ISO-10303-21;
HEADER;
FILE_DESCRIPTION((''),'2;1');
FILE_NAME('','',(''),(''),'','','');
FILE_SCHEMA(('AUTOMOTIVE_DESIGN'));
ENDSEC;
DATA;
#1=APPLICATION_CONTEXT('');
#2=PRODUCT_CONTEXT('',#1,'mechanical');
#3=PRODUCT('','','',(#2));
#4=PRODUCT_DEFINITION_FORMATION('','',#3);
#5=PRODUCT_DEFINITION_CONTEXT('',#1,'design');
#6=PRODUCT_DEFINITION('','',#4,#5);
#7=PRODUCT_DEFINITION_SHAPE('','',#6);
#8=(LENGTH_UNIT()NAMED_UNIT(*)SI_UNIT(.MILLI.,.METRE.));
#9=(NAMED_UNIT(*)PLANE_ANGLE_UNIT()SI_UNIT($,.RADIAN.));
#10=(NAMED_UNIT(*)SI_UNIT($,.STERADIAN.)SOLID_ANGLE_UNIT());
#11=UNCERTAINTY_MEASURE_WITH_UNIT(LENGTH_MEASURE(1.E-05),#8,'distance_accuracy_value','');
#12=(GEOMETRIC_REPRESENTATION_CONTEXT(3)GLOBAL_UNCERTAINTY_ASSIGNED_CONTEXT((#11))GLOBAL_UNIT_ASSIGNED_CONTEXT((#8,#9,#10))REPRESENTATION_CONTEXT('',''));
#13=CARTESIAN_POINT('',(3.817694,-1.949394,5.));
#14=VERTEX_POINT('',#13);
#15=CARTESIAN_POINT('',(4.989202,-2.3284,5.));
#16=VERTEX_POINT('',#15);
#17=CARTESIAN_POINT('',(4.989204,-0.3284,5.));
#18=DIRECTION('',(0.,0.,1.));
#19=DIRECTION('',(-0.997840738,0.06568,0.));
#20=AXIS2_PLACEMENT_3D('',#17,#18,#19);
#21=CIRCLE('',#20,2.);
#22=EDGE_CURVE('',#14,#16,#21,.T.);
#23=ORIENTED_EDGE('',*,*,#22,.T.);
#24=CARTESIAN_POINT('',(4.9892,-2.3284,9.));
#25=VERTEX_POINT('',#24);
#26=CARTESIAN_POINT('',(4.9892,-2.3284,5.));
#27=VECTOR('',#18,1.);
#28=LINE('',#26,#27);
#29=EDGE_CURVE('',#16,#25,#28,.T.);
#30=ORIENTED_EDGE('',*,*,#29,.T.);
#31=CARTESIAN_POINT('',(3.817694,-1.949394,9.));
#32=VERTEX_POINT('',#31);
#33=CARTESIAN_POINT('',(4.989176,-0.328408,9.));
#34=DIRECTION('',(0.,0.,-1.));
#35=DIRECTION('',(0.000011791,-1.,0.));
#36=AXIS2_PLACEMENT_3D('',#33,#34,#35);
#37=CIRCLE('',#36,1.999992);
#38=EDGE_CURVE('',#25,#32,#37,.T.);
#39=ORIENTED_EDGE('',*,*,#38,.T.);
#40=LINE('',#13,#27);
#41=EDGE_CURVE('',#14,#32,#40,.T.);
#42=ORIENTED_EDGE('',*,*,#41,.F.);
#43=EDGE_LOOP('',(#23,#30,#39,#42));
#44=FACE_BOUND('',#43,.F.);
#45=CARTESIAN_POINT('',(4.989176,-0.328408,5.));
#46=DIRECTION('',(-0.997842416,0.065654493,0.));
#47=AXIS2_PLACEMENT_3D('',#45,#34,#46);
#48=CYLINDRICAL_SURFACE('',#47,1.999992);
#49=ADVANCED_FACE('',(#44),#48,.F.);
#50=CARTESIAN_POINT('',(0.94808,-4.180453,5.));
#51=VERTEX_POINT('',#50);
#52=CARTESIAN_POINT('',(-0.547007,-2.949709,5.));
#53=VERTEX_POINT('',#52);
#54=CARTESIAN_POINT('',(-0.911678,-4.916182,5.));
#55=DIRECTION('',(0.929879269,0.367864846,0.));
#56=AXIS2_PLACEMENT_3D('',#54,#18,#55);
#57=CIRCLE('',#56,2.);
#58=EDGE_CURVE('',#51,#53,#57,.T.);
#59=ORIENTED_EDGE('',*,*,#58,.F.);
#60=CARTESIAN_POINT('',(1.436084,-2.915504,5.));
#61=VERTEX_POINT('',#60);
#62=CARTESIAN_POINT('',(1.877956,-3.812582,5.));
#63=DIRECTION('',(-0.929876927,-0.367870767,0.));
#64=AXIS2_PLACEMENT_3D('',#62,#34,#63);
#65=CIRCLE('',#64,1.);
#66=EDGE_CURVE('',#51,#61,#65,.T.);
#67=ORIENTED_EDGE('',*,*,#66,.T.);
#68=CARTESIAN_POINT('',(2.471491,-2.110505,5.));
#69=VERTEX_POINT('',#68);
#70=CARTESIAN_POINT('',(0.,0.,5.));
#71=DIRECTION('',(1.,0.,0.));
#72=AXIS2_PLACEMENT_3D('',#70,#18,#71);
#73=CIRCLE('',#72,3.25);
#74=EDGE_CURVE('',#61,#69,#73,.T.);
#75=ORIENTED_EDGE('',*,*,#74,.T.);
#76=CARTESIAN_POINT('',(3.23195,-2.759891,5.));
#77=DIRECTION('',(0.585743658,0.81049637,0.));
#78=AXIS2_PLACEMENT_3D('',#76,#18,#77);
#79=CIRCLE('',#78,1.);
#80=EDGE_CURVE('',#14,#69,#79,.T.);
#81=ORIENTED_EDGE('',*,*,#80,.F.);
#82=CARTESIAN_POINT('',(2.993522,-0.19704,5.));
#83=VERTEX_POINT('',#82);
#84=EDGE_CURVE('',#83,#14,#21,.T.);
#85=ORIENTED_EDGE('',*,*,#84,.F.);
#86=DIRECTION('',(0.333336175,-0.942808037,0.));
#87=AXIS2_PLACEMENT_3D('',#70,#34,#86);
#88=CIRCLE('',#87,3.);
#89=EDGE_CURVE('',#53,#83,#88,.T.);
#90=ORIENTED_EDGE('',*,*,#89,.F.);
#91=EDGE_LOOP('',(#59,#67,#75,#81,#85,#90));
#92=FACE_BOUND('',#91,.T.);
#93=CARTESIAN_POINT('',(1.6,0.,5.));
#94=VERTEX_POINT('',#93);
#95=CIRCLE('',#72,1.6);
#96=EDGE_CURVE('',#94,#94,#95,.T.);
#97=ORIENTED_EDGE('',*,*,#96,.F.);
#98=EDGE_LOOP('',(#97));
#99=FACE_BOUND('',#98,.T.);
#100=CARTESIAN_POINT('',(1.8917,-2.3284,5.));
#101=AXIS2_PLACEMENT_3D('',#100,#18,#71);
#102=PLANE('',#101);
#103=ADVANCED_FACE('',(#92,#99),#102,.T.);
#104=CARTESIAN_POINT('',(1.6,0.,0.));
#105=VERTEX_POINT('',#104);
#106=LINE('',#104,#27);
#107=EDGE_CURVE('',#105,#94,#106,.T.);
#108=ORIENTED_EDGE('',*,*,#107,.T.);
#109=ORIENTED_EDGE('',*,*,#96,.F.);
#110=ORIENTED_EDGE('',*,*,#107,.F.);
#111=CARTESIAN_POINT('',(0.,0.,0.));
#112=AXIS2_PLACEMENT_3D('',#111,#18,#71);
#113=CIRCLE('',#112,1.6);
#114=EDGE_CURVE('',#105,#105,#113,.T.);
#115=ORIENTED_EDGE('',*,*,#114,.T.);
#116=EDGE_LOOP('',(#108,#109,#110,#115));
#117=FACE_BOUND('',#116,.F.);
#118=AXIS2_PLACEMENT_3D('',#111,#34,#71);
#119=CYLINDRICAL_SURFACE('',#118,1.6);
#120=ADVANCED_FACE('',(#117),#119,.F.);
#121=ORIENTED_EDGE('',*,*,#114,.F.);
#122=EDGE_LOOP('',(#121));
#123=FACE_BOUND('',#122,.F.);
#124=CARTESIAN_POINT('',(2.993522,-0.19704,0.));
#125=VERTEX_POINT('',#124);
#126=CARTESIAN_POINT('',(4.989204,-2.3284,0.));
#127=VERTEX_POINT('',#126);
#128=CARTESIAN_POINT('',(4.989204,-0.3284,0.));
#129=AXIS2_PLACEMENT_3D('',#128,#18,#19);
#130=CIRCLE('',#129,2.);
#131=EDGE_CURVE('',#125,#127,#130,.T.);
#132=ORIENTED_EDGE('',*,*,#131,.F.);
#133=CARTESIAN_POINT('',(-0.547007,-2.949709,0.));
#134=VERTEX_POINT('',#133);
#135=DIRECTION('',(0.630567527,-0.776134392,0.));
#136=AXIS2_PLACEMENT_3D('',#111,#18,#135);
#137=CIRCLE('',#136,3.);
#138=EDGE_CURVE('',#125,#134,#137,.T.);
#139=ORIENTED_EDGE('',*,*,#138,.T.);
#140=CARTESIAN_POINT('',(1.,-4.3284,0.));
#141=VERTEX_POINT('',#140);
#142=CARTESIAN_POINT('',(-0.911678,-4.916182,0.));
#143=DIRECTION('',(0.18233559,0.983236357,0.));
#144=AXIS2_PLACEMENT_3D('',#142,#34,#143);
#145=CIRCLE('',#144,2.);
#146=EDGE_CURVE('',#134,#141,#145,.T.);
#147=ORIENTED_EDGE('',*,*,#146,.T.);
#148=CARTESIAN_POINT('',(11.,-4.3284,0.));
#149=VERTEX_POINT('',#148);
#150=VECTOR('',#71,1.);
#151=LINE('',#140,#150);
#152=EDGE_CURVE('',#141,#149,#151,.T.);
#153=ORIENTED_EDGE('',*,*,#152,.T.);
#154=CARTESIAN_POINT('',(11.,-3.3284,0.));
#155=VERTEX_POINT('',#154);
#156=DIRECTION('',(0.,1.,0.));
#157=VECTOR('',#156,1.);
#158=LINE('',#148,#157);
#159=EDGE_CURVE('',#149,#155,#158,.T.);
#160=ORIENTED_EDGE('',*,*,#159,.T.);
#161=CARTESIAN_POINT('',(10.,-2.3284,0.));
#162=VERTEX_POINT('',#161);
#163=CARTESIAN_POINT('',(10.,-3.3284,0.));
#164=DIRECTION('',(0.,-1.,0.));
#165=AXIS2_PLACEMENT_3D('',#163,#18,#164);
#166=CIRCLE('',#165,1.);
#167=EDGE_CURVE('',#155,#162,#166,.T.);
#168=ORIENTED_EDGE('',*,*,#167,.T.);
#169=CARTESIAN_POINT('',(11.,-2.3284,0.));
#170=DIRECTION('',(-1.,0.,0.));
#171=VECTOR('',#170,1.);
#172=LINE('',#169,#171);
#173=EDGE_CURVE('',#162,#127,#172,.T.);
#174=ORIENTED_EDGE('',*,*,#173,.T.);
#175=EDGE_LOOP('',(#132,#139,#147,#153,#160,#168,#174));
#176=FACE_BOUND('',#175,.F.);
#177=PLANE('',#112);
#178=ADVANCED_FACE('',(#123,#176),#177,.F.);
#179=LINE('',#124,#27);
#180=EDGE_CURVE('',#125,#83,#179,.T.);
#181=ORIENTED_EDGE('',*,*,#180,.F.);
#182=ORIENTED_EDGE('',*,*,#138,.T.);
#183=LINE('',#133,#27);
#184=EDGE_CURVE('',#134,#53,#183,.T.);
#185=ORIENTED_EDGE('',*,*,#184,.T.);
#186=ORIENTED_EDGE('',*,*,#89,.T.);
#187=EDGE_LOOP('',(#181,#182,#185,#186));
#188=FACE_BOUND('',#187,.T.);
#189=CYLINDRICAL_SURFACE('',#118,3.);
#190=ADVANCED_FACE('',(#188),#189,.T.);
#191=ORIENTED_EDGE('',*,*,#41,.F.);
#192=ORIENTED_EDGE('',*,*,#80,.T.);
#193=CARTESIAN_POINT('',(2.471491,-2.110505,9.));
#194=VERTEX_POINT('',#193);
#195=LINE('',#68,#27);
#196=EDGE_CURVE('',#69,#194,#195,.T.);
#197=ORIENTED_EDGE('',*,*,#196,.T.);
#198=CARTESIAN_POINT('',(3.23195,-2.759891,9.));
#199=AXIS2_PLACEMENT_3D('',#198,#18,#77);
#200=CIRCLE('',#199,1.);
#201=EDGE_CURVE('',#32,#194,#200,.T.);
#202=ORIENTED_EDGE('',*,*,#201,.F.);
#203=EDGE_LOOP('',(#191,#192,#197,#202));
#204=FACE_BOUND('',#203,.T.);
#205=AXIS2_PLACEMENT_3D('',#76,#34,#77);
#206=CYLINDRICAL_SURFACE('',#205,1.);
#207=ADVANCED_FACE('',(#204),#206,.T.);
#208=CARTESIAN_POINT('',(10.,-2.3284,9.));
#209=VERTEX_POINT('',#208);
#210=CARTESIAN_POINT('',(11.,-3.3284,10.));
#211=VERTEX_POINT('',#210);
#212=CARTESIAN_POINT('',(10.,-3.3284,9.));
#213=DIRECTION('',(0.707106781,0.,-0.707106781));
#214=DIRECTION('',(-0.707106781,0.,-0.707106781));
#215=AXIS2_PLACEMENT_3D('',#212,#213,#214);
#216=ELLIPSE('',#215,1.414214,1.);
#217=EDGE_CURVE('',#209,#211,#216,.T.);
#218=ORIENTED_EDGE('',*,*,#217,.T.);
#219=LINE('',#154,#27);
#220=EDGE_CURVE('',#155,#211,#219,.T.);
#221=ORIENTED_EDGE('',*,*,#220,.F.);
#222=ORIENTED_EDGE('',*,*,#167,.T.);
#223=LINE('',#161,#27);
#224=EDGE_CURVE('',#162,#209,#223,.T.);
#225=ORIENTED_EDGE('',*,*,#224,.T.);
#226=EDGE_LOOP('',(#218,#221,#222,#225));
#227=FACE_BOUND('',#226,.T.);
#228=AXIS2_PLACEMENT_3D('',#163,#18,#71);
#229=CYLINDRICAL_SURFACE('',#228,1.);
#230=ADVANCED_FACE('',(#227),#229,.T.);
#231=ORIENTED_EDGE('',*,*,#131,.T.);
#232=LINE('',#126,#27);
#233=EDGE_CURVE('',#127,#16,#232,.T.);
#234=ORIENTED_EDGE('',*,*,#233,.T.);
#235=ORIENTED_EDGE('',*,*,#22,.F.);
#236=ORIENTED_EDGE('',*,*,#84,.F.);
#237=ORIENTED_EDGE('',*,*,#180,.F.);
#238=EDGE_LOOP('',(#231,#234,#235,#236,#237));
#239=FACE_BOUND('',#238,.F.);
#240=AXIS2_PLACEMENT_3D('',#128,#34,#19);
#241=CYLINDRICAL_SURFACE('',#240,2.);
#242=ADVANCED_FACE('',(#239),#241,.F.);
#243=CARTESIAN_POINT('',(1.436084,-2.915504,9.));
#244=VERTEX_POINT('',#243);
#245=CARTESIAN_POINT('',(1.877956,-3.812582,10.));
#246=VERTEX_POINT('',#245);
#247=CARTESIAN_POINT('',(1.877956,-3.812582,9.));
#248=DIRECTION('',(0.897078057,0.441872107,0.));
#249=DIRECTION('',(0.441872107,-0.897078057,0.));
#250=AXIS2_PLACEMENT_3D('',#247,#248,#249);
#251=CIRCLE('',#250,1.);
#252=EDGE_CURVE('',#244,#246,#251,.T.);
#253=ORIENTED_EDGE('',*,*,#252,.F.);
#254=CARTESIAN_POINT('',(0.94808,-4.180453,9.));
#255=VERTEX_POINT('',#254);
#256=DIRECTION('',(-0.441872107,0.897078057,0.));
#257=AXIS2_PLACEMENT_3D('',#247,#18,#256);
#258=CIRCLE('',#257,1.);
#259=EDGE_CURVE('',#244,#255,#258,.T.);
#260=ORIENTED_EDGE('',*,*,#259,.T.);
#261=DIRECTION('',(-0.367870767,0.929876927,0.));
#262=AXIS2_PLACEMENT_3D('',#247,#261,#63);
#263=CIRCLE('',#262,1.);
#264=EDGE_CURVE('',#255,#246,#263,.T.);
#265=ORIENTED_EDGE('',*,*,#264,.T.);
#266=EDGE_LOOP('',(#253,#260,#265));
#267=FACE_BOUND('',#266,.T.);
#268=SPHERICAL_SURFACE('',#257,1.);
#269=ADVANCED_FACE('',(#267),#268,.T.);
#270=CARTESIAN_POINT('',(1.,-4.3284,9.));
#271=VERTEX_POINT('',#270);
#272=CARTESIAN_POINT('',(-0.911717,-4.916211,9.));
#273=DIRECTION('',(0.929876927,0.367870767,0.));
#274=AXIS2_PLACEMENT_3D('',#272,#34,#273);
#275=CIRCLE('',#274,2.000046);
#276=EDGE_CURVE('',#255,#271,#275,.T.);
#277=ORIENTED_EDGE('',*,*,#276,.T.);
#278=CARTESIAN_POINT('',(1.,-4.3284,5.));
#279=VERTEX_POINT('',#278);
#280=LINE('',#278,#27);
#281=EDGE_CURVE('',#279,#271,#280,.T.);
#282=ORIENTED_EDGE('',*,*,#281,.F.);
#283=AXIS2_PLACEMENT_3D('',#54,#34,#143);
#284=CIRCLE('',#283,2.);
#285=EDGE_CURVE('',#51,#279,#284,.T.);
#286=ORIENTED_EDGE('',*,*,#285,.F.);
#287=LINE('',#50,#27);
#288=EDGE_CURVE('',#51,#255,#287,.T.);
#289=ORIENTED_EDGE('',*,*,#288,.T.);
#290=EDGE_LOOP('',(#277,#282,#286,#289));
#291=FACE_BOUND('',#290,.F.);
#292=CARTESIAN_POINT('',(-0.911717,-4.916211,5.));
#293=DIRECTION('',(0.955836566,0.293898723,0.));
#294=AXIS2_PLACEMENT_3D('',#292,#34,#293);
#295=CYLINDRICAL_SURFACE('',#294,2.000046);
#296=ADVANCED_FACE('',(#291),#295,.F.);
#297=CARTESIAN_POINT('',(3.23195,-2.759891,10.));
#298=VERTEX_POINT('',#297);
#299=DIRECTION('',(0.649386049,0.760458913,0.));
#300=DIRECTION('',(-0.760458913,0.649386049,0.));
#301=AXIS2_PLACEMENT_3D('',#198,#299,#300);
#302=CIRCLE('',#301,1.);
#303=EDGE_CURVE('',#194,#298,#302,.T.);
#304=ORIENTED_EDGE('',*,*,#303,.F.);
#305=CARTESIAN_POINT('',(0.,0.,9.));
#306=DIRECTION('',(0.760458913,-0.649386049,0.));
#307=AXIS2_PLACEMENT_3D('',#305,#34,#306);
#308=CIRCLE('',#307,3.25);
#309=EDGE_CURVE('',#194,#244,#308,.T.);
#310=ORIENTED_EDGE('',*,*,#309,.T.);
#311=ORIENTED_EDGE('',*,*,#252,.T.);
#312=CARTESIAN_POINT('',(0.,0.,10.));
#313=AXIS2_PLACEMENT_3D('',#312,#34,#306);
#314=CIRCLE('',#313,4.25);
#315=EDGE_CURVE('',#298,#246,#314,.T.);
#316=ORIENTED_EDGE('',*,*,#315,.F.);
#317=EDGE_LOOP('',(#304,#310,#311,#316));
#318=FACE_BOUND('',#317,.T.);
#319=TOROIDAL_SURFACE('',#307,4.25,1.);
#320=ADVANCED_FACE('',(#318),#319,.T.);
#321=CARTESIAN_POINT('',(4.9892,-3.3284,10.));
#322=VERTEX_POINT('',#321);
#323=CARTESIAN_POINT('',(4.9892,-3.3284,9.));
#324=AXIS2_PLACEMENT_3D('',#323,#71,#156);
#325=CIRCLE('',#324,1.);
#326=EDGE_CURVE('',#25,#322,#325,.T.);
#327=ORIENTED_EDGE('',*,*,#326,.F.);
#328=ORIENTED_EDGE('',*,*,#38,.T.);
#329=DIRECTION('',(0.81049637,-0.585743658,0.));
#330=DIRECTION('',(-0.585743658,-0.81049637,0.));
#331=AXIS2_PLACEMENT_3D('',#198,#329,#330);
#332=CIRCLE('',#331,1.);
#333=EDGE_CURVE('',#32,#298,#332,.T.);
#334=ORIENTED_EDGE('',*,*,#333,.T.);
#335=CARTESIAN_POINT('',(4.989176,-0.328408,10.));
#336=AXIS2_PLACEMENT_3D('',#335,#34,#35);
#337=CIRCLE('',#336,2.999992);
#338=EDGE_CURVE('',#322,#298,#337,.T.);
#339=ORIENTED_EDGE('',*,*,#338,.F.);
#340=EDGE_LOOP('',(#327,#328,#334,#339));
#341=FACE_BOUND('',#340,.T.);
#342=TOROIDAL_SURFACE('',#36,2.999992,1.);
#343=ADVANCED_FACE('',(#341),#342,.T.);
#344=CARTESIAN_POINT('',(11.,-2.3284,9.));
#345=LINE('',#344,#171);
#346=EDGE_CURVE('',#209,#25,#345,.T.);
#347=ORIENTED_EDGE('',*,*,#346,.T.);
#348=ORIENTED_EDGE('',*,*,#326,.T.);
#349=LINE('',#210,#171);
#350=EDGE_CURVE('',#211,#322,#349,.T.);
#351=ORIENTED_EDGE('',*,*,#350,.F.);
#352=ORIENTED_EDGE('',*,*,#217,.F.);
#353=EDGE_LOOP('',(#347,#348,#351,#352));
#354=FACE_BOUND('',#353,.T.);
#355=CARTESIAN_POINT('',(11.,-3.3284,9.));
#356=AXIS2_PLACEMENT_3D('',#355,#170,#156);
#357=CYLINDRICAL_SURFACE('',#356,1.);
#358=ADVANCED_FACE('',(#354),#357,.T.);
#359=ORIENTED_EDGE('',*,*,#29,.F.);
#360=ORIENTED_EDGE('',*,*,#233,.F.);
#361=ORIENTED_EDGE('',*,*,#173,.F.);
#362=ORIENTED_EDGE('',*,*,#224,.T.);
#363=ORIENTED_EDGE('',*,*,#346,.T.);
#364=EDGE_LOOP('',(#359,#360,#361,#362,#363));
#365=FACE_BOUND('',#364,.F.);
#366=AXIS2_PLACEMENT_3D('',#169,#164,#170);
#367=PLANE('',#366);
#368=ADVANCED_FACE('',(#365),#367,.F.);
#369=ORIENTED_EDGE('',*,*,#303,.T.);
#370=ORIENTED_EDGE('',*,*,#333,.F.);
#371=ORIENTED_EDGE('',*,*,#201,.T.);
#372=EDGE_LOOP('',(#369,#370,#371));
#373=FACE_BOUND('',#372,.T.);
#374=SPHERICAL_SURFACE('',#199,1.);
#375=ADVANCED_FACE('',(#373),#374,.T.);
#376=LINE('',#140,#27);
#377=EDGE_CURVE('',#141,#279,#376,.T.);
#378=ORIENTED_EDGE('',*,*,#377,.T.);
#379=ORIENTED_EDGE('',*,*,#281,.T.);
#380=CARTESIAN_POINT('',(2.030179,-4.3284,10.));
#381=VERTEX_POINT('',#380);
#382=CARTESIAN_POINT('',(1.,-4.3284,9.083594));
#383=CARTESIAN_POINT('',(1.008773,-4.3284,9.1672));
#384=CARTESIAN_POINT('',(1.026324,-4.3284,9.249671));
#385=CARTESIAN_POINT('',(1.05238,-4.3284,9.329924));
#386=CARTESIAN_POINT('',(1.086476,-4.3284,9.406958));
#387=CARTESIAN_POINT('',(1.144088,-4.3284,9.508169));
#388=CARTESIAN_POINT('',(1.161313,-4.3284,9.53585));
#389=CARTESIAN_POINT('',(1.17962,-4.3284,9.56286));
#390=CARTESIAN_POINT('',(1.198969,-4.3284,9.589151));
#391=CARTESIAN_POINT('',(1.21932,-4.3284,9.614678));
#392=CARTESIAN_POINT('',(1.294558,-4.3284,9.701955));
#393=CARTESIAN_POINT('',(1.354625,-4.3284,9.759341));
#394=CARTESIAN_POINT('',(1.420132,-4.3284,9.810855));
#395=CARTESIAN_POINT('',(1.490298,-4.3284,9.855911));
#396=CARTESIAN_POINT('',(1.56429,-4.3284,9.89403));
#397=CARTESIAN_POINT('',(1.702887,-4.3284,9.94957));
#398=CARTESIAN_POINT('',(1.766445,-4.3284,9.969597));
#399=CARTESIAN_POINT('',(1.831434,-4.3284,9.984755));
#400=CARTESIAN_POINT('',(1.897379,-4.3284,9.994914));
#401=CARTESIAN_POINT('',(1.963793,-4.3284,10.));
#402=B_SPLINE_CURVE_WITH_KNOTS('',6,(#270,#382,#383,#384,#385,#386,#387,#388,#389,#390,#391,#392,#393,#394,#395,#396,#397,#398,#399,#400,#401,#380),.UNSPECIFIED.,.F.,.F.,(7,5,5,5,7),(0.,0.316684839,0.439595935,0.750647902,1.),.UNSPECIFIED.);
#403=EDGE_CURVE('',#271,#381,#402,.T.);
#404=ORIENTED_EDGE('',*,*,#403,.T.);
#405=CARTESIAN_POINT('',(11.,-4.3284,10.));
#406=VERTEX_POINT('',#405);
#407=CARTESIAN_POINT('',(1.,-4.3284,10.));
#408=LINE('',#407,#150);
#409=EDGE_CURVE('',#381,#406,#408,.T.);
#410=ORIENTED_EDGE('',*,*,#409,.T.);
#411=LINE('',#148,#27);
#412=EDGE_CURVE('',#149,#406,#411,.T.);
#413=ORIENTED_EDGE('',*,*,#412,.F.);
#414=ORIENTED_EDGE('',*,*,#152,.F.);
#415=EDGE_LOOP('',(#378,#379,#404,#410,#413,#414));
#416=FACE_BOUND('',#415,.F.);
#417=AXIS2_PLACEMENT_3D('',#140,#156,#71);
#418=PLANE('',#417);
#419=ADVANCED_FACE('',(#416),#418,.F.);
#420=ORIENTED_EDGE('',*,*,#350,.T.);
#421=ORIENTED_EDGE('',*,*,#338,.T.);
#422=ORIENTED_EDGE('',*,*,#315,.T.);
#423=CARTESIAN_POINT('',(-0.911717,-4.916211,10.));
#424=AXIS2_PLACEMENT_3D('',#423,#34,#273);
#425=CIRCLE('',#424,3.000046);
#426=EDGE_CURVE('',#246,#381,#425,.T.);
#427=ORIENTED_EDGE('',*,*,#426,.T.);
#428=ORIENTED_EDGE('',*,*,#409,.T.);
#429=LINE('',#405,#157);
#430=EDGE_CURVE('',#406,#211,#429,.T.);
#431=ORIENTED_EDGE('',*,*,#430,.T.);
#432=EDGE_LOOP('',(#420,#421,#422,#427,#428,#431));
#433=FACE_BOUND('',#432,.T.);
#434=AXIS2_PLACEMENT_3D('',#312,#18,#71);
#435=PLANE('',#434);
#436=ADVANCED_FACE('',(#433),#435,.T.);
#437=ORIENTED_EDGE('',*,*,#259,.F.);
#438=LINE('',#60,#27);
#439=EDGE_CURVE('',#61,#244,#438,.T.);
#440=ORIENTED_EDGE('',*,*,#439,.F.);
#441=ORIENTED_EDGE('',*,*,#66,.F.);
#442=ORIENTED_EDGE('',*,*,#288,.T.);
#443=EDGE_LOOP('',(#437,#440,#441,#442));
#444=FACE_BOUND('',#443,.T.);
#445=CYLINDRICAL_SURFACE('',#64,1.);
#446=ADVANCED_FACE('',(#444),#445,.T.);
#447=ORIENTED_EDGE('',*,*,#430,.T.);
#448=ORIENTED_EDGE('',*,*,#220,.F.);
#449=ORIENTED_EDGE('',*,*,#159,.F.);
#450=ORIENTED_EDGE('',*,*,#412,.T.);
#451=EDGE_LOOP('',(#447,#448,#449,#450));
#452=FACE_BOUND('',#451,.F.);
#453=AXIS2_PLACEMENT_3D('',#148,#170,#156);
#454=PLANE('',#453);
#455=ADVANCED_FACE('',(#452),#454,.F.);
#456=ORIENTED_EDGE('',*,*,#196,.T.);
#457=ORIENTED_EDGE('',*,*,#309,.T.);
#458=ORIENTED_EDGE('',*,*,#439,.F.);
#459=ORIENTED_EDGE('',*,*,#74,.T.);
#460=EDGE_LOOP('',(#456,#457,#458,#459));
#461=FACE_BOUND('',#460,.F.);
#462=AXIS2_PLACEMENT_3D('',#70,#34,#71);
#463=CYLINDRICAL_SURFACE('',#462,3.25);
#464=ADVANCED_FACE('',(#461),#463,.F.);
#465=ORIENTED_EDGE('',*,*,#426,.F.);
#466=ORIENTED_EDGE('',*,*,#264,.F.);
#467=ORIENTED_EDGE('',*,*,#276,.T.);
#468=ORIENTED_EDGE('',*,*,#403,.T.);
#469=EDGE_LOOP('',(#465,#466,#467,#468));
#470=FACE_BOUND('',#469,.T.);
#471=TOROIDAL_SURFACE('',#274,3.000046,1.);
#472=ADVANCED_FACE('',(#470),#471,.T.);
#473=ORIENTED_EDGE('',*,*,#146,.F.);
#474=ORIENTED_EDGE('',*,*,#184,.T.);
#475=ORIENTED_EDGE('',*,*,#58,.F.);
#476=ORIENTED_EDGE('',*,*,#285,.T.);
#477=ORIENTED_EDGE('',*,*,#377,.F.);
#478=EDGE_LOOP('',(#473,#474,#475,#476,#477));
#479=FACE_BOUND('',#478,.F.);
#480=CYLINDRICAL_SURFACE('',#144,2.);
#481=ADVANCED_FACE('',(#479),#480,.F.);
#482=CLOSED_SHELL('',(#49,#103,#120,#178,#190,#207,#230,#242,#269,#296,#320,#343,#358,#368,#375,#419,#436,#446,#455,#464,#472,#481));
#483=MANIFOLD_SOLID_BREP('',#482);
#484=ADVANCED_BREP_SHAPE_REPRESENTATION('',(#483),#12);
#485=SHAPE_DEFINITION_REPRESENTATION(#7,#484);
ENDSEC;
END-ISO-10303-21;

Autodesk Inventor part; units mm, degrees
ref_plane "YZ Plane" through (0, 0, 0) normal (1, 0, 0) x (0, 1, 0)
ref_plane "XZ Plane" through (0, 0, 0) normal (0, 1, 0) x (-1, 0, 0)
ref_plane "XY Plane" through (0, 0, 0) normal (0, 0, 1) x (1, 0, 0)
sketch "Sketch1" plane through (0, 0, 0) normal (0, 0, 1) x (1, 0, 0)
  circle A0 centre (0, 0) radius 1.6
  circle A1 centre (0, 0) radius 3
  line L0 (1, -2.8284) -> (1, -4.3284)
  line L1 (1, -2.8284) -> (2.5, -2.8284) construction
  line L2 (1, -4.3284) -> (11, -4.3284)
  line L3 (11, -4.3284) -> (11, -2.3284)
  line L4 (11, -2.3284) -> (1.8917, -2.3284)
  dimension "d0" = 3.2
  dimension "d1" = 6
  dimension "d2" = 1.5
  dimension "d3" = 90
  dimension "d4" = 10
  dimension "d5" = 2
extrude "Extrusion1" add sketch "Sketch1" along normal blind 5
fillet "Fillet1" radius 2 2 edges at (1.8917, -2.3284, 2.5) (1, -2.8284, 2.5)
sketch "Sketch2" plane through (0, 0, 5) normal (0, 0, 1) x (1, 0, 0)
  circle A0 centre (0, 0) radius 1.6 projected
  circle A1 centre (0, 0) radius 3.25
  line L0 (11, -2.3284) -> (4.9892, -2.3284) projected
  arc A2 (2.9935, -0.1971) -> (4.9892, -2.3284) centre (4.9892, -0.3284) ccw projected
  arc A3 (2.9935, -0.1971) -> (-0.547, -2.9497) centre (0, 0) ccw projected
  arc A4 (1, -4.3284) -> (-0.547, -2.9497) centre (-0.9117, -4.9162) ccw projected
  line L1 (1, -4.3284) -> (11, -4.3284) projected
  line L2 (11, -4.3284) -> (11, -2.3284) projected
  circle A5 centre (0, 0) radius 1.6 projected
  point P0 (3.0985, -0.9806)
  point P1 (0.1865, -3.2446)
  dimension "d9" = 6.5
extrude "Extrusion2" add sketch "Sketch2" along normal blind 5 contours A1 A2 L0 L2 L1 A4
fillet "Fillet2" radius 1 2 edges at (3.0985, -0.9806, 7.5) (0.1865, -3.2446, 7.5)
fillet "Fillet3" radius 1 7 edges at (7.9946, -2.3284, 10) (4.3736, -2.2313, 10) (3.1131, -1.767, 10) (1.9948, -2.5658, 10) (0.945, -3.4526, 10) (0.9755, -4.2539, 10) (11, -2.3284, 5)
properties part number "zawias"
